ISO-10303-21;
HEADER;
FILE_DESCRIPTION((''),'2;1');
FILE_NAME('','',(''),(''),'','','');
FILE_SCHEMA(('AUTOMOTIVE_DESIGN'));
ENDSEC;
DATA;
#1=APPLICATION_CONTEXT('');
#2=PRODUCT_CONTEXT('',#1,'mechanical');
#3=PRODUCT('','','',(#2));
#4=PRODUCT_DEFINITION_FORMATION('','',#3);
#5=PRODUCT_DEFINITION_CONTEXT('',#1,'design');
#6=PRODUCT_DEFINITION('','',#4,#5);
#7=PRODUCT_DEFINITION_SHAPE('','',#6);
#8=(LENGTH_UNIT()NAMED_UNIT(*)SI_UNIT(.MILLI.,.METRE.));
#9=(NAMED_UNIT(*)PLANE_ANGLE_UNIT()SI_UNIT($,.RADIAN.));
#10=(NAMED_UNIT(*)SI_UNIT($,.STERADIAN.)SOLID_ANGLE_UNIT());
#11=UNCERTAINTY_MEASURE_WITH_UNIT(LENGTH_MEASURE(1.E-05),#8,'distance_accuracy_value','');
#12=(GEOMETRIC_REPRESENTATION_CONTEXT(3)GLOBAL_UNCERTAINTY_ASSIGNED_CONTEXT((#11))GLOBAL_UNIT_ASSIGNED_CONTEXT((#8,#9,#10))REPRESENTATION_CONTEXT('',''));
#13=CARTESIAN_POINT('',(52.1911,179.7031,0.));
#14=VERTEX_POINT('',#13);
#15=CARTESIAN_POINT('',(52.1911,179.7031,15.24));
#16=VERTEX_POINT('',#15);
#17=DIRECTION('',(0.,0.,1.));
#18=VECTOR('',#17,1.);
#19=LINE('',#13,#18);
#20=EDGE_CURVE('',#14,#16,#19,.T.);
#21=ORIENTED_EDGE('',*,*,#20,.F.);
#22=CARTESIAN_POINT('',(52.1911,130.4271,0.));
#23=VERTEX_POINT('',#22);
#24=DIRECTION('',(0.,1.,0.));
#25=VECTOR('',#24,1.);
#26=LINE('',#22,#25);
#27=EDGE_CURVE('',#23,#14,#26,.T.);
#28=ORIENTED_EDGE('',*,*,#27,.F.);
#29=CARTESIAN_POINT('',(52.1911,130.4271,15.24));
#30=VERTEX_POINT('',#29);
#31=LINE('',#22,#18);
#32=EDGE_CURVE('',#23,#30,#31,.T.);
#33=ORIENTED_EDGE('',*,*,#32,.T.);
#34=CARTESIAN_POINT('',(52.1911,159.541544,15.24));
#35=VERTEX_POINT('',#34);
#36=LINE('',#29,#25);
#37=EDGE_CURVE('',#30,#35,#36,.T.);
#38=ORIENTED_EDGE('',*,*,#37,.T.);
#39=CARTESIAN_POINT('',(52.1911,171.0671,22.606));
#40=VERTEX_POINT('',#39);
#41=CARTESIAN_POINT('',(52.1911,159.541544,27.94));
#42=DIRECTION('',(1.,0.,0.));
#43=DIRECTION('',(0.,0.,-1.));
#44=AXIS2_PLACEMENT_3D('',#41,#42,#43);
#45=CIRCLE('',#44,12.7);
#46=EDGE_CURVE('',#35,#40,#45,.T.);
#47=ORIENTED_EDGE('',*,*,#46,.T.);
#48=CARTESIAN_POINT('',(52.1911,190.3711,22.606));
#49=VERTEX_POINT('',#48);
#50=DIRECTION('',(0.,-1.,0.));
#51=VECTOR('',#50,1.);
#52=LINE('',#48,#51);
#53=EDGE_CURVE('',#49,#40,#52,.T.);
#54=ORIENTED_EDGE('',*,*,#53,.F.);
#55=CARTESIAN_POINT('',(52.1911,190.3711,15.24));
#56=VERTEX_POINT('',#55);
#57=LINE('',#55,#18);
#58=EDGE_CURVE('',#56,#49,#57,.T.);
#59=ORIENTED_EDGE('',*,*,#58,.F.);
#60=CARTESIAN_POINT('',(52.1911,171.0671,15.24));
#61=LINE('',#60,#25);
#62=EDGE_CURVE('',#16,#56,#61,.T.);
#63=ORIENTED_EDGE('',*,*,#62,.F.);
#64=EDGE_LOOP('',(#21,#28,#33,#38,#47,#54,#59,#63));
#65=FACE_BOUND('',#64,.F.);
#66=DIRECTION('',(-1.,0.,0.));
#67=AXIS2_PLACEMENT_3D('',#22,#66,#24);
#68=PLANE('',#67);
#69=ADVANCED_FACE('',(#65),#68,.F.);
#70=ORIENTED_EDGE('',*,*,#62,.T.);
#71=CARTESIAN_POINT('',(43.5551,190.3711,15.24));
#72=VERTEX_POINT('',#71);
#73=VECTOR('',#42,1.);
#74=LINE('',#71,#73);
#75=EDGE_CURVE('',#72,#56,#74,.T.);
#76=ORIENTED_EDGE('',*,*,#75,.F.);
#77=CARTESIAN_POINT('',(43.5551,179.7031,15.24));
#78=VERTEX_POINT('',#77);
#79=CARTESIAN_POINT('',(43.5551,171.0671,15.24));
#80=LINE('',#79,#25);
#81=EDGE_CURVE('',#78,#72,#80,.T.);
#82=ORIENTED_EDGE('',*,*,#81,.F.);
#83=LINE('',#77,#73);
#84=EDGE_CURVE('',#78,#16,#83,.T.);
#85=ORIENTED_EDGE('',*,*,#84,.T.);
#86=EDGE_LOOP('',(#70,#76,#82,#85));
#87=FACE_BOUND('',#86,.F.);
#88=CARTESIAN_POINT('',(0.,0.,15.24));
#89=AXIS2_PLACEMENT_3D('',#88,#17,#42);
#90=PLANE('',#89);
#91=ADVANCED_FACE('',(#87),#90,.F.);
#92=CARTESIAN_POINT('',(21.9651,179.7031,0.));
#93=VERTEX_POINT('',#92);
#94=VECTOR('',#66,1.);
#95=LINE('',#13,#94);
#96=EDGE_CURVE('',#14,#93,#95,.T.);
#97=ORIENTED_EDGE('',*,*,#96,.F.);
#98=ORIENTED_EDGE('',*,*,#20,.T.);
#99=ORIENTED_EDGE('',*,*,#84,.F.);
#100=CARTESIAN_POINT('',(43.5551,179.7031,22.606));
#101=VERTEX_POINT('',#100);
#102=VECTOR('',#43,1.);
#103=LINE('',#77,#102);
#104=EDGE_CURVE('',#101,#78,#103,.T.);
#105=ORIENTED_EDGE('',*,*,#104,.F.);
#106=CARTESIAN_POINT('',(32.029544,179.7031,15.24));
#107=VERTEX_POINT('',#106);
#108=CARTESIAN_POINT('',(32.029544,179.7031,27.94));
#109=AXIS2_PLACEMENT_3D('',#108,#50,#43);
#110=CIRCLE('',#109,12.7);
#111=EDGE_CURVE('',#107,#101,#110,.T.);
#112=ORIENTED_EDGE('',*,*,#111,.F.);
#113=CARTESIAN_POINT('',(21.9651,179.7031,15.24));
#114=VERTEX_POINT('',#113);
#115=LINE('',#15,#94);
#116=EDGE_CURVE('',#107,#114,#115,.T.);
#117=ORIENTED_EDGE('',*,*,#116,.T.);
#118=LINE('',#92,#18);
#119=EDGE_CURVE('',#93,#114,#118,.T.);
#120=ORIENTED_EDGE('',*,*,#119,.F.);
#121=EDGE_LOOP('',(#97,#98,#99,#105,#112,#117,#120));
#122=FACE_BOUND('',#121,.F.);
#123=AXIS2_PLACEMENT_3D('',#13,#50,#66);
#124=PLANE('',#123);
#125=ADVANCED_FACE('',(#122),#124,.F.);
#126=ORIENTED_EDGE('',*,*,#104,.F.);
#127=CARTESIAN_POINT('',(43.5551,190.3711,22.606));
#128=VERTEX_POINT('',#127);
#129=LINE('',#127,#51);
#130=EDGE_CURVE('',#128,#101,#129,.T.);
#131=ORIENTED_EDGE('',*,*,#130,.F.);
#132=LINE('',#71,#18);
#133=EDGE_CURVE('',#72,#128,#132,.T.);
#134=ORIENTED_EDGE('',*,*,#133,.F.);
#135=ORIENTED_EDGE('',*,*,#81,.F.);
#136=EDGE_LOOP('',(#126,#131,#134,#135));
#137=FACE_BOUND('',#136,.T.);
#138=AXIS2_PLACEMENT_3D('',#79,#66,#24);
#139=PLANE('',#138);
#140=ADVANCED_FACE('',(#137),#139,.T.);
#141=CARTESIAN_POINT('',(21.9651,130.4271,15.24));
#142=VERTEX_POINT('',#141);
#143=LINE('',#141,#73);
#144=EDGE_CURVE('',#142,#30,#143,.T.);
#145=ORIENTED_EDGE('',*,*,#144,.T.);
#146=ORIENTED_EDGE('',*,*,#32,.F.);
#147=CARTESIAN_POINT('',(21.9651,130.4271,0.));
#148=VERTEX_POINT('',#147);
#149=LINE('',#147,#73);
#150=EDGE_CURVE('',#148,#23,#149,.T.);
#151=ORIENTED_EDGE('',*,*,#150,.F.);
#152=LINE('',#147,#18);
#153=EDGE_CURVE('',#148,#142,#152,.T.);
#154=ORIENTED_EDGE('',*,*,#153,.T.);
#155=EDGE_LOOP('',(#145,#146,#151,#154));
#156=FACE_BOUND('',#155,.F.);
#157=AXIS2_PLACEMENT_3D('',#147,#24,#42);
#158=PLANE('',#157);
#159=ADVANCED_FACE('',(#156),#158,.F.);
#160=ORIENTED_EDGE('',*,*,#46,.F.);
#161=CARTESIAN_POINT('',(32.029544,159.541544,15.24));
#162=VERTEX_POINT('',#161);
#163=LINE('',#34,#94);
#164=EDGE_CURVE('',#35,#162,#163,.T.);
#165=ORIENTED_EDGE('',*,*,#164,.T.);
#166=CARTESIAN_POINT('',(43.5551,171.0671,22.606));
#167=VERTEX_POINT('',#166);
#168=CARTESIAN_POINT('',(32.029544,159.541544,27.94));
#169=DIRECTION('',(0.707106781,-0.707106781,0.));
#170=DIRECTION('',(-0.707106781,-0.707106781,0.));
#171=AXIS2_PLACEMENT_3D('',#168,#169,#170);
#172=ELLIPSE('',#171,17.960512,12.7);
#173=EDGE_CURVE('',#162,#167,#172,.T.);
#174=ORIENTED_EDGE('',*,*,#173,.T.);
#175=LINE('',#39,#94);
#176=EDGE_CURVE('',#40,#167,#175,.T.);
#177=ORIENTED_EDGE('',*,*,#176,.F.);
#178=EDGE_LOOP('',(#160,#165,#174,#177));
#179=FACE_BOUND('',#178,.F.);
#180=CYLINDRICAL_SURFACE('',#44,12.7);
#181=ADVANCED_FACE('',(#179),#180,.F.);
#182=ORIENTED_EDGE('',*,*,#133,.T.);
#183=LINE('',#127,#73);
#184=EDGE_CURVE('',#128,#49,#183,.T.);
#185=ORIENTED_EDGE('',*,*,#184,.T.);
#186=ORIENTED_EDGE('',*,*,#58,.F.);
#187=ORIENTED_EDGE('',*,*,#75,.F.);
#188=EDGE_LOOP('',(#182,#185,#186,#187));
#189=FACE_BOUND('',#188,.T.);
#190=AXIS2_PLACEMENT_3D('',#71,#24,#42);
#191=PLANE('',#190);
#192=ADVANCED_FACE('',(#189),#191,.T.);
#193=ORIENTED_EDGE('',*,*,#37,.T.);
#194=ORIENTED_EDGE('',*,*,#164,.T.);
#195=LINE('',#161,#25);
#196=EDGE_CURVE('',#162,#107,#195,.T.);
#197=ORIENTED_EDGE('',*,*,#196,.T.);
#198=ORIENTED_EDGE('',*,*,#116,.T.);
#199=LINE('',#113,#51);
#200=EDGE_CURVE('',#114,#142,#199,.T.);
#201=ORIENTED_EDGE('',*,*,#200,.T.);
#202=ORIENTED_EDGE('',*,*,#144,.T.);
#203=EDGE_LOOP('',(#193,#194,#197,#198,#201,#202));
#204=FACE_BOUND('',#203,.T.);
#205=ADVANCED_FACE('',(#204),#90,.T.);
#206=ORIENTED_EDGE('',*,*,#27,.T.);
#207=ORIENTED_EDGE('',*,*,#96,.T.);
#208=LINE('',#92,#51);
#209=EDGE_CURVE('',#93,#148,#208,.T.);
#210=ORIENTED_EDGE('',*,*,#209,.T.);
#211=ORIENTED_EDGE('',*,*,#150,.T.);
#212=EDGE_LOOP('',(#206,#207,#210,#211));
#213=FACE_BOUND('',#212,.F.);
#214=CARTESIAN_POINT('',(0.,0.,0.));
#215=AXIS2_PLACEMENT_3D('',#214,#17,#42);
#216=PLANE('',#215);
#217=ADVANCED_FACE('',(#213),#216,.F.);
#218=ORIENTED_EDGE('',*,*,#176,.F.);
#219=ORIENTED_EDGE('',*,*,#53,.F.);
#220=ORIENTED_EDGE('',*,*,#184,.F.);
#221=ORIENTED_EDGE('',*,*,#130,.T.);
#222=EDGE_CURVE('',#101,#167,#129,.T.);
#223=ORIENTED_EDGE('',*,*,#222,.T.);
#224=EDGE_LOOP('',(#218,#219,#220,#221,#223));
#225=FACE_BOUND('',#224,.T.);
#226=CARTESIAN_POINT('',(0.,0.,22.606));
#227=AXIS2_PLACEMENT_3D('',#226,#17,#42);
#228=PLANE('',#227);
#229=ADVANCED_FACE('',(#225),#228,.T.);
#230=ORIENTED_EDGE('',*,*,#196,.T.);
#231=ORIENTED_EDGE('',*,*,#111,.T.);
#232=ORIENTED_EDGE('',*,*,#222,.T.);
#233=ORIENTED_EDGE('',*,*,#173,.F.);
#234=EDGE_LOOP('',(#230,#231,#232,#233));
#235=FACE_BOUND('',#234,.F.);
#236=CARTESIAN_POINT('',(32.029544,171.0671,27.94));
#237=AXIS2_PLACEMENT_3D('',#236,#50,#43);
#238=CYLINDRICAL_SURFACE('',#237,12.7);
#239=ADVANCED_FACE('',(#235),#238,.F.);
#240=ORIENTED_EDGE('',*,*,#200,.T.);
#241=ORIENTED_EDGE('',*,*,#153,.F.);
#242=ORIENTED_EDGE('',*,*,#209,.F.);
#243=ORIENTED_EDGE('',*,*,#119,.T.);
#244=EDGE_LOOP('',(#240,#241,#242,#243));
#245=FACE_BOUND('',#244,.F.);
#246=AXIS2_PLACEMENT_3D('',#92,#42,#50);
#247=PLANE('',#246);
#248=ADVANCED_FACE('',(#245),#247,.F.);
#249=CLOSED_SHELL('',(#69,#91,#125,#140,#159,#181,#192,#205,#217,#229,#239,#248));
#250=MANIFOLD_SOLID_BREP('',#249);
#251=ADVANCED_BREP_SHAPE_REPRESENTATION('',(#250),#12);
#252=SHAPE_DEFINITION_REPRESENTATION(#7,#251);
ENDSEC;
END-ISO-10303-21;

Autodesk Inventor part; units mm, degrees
ref_plane "YZ Plane" through (0, 0, 0) normal (1, 0, 0) x (0, 1, 0)
ref_plane "XZ Plane" through (0, 0, 0) normal (0, 1, 0) x (-1, 0, 0)
ref_plane "XY Plane" through (0, 0, 0) normal (0, 0, 1) x (1, 0, 0)
sketch "Sketch1" plane through (0, 0, 0) normal (0, 0, 1) x (1, 0, 0)
  line L0 (52.1911, 179.7031) -> (21.9651, 179.7031)
  line L1 (21.9651, 179.7031) -> (21.9651, 130.4271)
  line L2 (21.9651, 130.4271) -> (52.1911, 130.4271)
  line L3 (52.1911, 130.4271) -> (52.1911, 179.7031)
  point P0 (0, 0)
  dimension "d0" = 30.226
  dimension "d1" = 49.276
extrude "Extrusion1" add sketch "Sketch1" along normal blind 15.24
sketch "Sketch2" plane through (0, 0, 15.24) normal (0, 0, 1) x (1, 0, 0)
  line L0 (52.1911, 179.7031) -> (52.1911, 130.4271) projected
  line L1 (21.9651, 179.7031) -> (52.1911, 179.7031) projected
  line L2 (52.1911, 171.0671) -> (43.5551, 171.0671)
  line L3 (43.5551, 171.0671) -> (43.5551, 190.3711)
  line L4 (43.5551, 190.3711) -> (52.1911, 190.3711)
  line L5 (52.1911, 190.3711) -> (52.1911, 171.0671)
  point P0 (0, 0)
  dimension "d4" = 8.636
  dimension "d5" = 8.636
  dimension "d6" = 10.668
extrude "Extrusion2" add sketch "Sketch2" along normal blind 7.366
fillet "Fillet1" radius 12.7 2 edges at (43.5551, 175.3851, 15.24) (47.8731, 171.0671, 15.24)
properties part number "Rangelink Reciever"
